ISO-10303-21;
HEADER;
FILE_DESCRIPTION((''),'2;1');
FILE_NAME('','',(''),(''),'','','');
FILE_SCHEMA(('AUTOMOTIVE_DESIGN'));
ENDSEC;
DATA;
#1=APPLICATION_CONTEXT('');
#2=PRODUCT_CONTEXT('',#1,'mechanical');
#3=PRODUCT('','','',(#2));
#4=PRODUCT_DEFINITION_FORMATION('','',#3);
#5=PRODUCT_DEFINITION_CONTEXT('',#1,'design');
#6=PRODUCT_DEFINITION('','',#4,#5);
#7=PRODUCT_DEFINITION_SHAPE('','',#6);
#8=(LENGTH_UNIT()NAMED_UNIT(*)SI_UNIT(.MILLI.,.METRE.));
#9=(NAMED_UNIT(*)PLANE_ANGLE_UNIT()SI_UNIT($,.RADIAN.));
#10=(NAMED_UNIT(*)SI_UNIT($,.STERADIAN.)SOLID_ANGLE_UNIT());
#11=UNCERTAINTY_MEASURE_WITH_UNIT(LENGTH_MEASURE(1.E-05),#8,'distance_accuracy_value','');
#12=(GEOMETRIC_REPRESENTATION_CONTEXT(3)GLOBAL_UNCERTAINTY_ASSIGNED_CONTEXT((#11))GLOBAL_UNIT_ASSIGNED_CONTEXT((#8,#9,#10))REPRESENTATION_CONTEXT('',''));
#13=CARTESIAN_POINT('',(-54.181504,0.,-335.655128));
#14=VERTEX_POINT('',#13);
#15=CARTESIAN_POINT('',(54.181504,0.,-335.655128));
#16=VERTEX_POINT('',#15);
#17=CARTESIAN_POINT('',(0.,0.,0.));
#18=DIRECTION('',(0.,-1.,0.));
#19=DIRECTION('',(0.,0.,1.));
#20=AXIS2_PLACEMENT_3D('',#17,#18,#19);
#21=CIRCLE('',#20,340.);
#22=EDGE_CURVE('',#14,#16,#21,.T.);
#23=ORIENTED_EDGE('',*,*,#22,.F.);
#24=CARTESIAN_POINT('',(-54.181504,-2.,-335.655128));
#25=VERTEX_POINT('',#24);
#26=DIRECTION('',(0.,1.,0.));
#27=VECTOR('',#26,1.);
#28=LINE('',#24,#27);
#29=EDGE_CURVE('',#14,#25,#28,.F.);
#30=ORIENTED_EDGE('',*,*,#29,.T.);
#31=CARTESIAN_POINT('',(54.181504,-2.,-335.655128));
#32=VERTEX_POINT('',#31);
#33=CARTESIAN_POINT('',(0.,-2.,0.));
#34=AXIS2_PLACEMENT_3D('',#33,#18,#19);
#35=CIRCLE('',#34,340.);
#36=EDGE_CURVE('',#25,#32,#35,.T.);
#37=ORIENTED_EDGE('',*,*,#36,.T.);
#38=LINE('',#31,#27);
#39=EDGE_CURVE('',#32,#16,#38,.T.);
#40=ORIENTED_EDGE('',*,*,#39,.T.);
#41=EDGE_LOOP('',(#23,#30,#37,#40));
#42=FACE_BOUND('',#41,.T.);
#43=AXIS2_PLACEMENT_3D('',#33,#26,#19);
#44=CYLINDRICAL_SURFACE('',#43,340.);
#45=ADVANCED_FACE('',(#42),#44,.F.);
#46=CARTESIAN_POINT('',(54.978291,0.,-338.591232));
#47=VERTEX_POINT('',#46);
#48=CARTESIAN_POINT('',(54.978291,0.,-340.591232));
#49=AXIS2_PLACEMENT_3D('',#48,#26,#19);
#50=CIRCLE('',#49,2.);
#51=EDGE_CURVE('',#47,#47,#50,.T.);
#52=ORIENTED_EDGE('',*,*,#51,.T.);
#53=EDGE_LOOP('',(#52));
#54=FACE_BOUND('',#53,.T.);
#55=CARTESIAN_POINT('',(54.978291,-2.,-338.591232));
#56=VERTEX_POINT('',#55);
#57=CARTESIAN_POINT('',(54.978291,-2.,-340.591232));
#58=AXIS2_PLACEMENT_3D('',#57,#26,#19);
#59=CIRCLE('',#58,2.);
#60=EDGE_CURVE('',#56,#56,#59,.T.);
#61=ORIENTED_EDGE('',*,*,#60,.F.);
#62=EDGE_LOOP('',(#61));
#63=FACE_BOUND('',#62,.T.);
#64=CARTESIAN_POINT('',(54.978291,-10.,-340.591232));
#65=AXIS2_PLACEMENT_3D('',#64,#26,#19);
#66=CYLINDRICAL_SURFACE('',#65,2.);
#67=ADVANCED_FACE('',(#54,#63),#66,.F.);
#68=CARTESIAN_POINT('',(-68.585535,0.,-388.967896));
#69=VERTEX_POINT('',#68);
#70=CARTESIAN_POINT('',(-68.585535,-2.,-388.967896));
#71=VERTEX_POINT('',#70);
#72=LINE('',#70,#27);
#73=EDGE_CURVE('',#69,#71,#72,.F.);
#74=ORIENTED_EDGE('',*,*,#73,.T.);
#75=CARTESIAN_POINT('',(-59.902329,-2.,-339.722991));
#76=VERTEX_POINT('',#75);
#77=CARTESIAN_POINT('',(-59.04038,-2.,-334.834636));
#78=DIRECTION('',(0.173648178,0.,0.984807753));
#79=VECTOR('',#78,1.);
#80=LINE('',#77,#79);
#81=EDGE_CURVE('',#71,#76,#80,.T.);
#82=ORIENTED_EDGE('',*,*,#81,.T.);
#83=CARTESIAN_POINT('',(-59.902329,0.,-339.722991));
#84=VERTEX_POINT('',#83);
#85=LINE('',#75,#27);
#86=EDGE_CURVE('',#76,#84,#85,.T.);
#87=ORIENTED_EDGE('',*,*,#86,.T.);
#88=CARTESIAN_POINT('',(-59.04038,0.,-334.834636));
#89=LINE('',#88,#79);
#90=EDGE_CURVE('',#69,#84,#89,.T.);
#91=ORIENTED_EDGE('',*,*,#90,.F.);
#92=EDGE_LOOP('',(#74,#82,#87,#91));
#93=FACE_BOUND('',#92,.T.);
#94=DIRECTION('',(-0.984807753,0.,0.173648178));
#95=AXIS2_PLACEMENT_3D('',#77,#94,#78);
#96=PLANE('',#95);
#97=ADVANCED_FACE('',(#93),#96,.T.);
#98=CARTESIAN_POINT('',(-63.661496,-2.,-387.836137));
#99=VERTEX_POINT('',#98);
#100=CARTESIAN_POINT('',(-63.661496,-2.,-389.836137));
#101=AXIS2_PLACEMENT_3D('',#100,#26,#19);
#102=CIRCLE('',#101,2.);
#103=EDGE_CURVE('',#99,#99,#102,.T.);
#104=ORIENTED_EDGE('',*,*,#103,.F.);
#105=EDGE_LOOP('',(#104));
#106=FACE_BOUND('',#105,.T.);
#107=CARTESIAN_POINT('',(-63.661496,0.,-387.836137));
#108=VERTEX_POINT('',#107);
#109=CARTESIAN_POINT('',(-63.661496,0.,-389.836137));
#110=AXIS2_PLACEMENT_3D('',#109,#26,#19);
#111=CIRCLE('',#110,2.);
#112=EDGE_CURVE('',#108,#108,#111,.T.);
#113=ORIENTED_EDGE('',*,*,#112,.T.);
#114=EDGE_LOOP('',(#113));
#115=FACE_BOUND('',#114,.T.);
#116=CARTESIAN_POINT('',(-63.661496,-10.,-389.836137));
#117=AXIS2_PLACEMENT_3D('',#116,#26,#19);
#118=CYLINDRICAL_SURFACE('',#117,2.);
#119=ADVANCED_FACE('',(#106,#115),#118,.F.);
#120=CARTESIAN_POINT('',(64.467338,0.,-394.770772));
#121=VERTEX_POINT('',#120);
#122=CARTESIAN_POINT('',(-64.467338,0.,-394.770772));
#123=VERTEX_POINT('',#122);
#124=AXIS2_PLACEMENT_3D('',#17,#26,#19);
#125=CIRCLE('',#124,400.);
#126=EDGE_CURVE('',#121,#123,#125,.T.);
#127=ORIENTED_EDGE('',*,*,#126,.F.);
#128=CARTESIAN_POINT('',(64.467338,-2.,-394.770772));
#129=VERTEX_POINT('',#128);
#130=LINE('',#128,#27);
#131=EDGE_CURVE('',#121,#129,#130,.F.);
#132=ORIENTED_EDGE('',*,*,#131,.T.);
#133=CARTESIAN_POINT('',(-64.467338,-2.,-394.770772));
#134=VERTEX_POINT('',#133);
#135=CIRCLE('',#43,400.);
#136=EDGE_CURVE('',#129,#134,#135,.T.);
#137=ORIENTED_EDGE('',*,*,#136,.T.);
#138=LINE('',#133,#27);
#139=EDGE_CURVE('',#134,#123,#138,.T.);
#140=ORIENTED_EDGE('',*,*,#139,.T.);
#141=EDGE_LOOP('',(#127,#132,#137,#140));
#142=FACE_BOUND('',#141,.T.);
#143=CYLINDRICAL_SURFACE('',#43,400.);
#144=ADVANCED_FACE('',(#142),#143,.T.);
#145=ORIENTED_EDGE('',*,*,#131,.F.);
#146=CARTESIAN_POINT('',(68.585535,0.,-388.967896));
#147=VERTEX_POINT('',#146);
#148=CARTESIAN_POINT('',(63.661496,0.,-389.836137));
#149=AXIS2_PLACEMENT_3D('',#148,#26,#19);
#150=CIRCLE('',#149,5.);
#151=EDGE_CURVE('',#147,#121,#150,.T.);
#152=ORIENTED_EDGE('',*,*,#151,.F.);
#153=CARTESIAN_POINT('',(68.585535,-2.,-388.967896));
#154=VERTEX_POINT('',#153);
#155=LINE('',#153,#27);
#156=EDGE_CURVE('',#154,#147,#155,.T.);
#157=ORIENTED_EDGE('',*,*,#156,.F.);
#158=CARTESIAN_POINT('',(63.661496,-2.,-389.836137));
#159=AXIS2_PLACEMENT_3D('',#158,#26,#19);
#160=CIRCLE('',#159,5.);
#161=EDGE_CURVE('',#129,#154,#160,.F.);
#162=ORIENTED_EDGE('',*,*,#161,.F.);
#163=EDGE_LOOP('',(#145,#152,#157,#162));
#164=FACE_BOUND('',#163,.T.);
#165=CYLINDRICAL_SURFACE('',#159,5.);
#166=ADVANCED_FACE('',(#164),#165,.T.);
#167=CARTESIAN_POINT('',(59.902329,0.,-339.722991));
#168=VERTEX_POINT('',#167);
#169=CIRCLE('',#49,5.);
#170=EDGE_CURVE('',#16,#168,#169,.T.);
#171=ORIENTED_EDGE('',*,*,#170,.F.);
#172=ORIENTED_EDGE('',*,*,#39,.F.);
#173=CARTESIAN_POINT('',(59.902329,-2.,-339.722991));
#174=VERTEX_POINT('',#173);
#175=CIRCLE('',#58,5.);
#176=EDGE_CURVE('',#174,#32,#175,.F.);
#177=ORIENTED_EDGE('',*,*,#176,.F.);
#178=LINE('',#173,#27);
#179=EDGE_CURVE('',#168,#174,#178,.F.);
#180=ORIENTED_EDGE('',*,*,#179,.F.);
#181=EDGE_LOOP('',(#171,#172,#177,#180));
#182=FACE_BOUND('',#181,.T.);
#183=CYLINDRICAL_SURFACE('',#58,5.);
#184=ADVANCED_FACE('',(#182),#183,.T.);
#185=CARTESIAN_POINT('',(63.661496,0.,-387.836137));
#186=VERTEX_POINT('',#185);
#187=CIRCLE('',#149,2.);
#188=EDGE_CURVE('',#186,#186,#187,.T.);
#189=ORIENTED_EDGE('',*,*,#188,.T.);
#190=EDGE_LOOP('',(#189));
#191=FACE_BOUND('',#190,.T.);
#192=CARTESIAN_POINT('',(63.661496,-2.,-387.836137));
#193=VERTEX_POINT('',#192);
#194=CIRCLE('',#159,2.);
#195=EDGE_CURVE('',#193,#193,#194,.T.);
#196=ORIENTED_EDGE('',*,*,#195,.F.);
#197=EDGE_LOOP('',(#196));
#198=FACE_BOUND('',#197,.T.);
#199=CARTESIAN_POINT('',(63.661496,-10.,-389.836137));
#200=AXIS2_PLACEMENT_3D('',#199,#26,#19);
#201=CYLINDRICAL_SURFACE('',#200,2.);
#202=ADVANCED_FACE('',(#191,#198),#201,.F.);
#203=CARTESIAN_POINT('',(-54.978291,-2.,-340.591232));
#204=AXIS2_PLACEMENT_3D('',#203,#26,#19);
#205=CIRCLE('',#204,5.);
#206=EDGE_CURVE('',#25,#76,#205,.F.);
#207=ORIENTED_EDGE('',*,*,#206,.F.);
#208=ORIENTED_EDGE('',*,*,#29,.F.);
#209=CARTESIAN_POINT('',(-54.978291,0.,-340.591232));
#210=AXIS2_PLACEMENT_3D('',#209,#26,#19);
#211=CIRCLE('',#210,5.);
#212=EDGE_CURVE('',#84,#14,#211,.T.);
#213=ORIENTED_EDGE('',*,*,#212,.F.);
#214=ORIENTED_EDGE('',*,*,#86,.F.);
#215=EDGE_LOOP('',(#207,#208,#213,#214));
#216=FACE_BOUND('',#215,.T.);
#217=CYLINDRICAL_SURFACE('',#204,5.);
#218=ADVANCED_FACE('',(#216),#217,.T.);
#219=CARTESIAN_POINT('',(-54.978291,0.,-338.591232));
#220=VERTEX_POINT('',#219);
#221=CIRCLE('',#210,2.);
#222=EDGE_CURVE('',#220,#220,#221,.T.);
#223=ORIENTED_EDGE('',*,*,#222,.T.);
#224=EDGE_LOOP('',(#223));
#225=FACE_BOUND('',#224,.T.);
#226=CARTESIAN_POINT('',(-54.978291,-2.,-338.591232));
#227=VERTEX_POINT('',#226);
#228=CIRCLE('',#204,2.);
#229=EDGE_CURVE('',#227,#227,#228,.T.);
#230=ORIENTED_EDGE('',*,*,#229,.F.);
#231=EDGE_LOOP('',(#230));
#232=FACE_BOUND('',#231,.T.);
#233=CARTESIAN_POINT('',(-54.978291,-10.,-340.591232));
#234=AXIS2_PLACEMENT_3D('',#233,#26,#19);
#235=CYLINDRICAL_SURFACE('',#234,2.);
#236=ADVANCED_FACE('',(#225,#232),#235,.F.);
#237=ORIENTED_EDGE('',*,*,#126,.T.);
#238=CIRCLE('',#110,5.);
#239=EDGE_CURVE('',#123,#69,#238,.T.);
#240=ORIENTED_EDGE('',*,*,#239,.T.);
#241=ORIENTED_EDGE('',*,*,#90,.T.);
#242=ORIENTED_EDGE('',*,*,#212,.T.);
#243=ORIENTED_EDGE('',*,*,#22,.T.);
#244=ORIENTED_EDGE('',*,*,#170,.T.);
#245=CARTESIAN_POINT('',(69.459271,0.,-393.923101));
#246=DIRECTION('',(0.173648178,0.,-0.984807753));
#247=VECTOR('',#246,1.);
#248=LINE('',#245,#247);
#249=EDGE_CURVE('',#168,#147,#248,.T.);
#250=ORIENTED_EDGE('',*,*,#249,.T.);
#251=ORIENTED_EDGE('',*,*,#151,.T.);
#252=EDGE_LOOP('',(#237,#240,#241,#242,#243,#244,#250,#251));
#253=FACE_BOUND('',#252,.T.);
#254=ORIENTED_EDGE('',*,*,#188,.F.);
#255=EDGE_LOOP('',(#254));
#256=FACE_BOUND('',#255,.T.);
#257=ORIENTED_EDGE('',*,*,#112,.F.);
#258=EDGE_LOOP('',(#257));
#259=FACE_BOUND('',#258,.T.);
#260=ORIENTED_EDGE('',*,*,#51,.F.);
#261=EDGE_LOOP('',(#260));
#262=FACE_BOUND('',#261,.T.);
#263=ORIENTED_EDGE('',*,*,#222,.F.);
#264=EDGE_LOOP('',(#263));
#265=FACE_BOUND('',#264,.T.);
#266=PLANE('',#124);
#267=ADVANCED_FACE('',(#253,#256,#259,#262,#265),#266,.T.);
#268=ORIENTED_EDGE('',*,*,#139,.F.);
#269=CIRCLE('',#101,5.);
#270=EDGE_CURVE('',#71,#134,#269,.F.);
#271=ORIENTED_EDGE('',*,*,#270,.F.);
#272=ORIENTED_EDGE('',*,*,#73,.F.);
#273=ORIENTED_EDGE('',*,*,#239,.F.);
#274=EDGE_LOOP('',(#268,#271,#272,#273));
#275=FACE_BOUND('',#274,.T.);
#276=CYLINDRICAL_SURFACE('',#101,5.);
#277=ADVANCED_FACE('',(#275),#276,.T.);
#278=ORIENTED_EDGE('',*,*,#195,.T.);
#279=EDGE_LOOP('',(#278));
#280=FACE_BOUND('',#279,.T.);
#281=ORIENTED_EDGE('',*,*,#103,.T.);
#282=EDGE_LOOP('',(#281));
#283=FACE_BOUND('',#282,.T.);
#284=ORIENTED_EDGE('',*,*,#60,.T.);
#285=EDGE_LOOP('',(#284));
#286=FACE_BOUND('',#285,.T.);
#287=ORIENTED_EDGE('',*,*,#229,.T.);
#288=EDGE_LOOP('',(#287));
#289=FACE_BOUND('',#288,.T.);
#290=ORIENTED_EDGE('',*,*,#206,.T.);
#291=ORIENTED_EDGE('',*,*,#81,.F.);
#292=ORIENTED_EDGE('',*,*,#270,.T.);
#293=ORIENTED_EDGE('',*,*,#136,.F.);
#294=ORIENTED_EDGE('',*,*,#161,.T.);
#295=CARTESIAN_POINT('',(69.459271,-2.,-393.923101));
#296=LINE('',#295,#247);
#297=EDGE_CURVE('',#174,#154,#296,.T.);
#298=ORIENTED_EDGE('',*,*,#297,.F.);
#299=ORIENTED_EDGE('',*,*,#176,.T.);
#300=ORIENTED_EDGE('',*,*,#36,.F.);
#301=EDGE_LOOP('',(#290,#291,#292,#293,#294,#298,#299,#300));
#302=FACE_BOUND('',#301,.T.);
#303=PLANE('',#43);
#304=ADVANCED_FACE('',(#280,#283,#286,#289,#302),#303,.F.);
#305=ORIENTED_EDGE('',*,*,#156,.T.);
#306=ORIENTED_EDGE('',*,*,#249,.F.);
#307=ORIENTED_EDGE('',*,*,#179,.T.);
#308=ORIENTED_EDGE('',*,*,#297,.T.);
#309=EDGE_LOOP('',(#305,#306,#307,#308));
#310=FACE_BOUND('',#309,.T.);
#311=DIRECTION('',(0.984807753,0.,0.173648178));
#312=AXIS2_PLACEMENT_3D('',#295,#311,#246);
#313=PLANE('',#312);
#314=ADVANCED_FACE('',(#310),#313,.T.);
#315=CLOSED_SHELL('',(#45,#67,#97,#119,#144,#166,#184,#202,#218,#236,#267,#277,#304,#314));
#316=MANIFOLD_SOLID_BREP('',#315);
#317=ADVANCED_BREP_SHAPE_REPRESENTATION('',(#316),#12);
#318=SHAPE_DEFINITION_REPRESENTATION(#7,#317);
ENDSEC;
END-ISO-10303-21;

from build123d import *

# Parameters (mm, degrees)
SM_BASE_FLANGE_1_DEPTH = 2
FILLET_1_R             = 5
SKETCH_2_R             = 2
CUT_EXTRUDE_1_DEPTH    = 10


# Sheet-metal steps are written as plain solids
with BuildPart() as part:
    # Sketch 1 → Базовая кромка1 (new body)
    with BuildSketch(Plane(origin=(0, 0, 0), x_dir=(1, 0, 0), z_dir=(0, 1, 0))):
        with BuildLine():
            Line((-59.040380407, 334.834636024), (-69.459271067, 393.923101205))
            ThreePointArc((-69.459271067, 393.923101205), (0, 400), (69.459271067, 393.923101205))
            Line((69.459271067, 393.923101205), (59.040380407, 334.834636024))
            ThreePointArc((59.040380407, 334.834636024), (0, 340), (-59.040380407, 334.834636024))
        make_face()
    extrude(amount=-SM_BASE_FLANGE_1_DEPTH)

    # Скругление1
    fillet_1_edges = [part.edges().sort_by_distance(p)[0] for p in [
        (-59.040380407, -1, -334.834636024),
        (-69.459271067, -1, -393.923101205),
        (69.459271067, -1, -393.923101205),
        (59.040380407, -1, -334.834636024),
    ]]
    fillet(fillet_1_edges, radius=FILLET_1_R)

    # Эскиз2 → Вырез-Вытянуть1 (cut)
    with BuildSketch(Plane(origin=(0, 0, 0), x_dir=(1, 0, 0), z_dir=(0, 1, 0))):
        with Locations(Location((-63.661495998, 389.836137277, 0), (0, 0, 270))):
            Circle(SKETCH_2_R)
        with Locations(Location((-54.978290599, 340.591232363, 0), (0, 0, 270))):
            Circle(SKETCH_2_R)
        with Locations(Location((63.661495998, 389.836137277, 0), (0, 0, 270))):
            Circle(SKETCH_2_R)
        with Locations(Location((54.978290599, 340.591232363, 0), (0, 0, 270))):
            Circle(SKETCH_2_R)
    extrude(amount=-CUT_EXTRUDE_1_DEPTH, mode=Mode.SUBTRACT)


solid = part.part
